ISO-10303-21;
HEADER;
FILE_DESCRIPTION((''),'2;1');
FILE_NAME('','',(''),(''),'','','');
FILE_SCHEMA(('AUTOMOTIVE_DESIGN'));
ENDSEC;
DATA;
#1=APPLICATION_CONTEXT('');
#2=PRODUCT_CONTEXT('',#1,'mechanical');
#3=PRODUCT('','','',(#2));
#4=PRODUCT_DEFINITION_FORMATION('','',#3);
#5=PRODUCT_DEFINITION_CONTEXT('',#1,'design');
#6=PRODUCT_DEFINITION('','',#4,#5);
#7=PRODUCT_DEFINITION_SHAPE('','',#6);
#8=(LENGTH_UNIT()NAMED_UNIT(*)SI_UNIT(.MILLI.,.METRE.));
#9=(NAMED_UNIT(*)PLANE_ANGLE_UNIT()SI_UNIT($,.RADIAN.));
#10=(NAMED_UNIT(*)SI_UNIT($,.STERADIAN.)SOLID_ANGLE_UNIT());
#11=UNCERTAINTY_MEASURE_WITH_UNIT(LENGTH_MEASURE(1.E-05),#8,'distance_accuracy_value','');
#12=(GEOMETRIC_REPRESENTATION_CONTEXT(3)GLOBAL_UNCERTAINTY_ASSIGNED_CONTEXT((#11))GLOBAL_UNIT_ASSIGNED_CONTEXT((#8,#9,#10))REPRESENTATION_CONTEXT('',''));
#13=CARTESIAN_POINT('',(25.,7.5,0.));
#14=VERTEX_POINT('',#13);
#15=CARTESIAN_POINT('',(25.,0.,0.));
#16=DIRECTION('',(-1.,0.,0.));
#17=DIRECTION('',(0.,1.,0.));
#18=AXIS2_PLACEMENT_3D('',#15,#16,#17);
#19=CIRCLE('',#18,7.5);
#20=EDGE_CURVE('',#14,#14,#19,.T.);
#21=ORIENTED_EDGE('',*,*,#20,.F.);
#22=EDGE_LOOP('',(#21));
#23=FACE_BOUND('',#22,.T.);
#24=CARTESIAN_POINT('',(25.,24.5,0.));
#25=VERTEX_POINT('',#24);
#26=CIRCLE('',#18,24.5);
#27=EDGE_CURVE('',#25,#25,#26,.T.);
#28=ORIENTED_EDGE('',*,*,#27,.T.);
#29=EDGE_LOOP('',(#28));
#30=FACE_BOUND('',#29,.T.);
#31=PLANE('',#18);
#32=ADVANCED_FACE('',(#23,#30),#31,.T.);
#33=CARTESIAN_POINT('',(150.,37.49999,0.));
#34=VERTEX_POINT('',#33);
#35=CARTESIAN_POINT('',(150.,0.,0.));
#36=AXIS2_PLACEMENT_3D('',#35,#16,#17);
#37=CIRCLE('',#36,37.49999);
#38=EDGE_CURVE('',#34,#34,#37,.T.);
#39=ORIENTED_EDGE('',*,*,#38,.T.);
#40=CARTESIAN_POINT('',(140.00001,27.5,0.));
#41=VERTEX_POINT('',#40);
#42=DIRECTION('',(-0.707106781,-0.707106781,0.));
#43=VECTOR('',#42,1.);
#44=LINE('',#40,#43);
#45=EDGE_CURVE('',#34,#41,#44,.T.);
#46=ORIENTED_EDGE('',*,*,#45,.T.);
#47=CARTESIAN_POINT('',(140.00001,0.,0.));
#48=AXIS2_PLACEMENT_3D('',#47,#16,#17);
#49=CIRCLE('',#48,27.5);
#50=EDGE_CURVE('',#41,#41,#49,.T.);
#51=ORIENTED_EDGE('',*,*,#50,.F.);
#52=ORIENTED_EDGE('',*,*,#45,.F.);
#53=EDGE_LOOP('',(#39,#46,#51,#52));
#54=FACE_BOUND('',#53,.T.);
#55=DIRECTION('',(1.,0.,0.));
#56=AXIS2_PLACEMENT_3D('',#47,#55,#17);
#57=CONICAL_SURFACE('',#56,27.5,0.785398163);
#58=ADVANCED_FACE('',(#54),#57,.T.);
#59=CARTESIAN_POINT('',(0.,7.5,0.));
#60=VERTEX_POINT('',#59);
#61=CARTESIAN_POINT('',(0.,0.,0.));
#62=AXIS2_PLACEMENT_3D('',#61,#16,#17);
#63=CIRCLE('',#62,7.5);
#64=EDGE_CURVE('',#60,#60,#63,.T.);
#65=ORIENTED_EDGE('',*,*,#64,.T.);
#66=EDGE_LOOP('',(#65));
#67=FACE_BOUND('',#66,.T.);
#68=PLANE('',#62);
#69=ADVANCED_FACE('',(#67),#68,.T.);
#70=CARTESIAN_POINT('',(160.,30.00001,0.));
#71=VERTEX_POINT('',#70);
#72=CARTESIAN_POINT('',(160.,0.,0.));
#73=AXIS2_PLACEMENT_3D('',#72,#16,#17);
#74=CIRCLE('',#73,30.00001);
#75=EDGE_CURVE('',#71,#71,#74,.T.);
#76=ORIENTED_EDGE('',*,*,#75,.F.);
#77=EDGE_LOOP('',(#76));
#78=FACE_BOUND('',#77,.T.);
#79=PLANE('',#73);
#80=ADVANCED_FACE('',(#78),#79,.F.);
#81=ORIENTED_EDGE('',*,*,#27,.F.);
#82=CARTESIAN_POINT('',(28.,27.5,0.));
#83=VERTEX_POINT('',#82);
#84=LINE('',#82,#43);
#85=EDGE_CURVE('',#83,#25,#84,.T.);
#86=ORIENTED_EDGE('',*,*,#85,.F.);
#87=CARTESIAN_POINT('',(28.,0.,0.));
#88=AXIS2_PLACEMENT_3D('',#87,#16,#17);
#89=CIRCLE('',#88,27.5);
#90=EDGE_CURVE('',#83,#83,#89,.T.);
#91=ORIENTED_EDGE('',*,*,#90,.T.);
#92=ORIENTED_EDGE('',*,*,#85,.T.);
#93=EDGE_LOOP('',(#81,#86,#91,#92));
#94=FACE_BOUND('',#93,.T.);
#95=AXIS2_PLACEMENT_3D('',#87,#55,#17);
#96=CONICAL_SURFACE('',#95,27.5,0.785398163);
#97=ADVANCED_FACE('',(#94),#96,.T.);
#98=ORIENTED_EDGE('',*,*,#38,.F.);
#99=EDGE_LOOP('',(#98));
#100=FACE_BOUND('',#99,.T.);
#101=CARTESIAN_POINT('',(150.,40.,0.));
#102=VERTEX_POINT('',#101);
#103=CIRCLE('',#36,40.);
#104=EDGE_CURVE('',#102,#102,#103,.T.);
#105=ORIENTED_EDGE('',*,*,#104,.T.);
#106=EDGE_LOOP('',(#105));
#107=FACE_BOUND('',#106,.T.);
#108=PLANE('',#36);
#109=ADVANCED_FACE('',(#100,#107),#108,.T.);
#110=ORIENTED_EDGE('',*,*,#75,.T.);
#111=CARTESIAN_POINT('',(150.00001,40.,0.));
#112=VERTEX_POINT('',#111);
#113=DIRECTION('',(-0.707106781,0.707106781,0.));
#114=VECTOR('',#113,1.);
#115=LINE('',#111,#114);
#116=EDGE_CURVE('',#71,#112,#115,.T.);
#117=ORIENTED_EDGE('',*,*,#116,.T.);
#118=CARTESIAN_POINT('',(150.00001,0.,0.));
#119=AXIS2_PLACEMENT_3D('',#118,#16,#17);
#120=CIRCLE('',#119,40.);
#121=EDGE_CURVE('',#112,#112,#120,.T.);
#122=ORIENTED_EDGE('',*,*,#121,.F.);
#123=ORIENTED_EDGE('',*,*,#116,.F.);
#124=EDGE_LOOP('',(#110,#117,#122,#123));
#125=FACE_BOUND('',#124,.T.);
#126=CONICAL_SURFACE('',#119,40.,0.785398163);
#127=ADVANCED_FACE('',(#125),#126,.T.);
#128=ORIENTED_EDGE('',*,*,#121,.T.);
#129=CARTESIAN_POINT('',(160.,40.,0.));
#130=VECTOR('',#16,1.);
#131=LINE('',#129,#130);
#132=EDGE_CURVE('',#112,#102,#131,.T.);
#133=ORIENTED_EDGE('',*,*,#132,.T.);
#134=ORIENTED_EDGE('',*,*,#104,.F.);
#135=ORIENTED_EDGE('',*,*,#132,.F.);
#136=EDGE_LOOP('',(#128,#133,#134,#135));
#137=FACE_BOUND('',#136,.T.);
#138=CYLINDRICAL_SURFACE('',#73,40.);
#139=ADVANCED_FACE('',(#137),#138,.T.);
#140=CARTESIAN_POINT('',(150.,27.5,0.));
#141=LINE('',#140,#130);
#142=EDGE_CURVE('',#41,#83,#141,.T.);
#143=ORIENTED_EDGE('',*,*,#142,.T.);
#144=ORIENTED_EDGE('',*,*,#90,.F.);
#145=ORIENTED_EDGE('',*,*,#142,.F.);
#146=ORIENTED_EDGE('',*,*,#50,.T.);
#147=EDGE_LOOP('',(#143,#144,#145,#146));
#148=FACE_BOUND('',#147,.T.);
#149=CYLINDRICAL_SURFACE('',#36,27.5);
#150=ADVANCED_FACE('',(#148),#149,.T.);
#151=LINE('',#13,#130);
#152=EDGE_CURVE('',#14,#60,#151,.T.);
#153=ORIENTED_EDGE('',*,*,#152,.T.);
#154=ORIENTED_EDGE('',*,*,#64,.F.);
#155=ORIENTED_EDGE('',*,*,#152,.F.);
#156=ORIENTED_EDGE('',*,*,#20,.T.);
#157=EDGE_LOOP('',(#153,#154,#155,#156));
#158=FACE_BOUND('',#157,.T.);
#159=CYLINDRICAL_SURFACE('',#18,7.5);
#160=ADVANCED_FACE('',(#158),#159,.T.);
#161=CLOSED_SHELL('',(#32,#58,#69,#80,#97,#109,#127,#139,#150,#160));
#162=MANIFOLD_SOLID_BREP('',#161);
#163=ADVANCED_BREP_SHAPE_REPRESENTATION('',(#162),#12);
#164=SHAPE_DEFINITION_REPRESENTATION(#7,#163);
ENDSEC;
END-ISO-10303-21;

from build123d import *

# Parameters (mm, degrees)
F2_SIZE = 9.99999
F3_SIZE = 3


# Not quite as in the source:
# - a fillet or chamfer is up to 0.001 mm smaller than in the source, because OpenCascade refuses the exact size


with BuildPart() as f1:
    # F0 (on Top) → F1 (revolve)
    with BuildSketch(Plane.XY):
        Polygon((0, 7.5), (0, 0), (160, 0), (160, 40), (150, 40), (150, 27.5), (25, 27.5), (25, 7.5), align=None)
    revolve(axis=Axis((80, 0, 0), (-1, 0, 0)))

    # F2 (size 10 in the source; OpenCascade refuses exactly that, so slightly less here)
    f2_edges = [f1.edges().sort_by_distance(p)[0] for p in [
        (160, -40, 0),
        (150, -27.5, 0),
    ]]
    chamfer(f2_edges, length=F2_SIZE)

    # F3
    f3_edges = [f1.edges().sort_by_distance(p)[0] for p in [
        (25, -27.5, 0),
    ]]
    chamfer(f3_edges, length=F3_SIZE)


solid = f1.part
